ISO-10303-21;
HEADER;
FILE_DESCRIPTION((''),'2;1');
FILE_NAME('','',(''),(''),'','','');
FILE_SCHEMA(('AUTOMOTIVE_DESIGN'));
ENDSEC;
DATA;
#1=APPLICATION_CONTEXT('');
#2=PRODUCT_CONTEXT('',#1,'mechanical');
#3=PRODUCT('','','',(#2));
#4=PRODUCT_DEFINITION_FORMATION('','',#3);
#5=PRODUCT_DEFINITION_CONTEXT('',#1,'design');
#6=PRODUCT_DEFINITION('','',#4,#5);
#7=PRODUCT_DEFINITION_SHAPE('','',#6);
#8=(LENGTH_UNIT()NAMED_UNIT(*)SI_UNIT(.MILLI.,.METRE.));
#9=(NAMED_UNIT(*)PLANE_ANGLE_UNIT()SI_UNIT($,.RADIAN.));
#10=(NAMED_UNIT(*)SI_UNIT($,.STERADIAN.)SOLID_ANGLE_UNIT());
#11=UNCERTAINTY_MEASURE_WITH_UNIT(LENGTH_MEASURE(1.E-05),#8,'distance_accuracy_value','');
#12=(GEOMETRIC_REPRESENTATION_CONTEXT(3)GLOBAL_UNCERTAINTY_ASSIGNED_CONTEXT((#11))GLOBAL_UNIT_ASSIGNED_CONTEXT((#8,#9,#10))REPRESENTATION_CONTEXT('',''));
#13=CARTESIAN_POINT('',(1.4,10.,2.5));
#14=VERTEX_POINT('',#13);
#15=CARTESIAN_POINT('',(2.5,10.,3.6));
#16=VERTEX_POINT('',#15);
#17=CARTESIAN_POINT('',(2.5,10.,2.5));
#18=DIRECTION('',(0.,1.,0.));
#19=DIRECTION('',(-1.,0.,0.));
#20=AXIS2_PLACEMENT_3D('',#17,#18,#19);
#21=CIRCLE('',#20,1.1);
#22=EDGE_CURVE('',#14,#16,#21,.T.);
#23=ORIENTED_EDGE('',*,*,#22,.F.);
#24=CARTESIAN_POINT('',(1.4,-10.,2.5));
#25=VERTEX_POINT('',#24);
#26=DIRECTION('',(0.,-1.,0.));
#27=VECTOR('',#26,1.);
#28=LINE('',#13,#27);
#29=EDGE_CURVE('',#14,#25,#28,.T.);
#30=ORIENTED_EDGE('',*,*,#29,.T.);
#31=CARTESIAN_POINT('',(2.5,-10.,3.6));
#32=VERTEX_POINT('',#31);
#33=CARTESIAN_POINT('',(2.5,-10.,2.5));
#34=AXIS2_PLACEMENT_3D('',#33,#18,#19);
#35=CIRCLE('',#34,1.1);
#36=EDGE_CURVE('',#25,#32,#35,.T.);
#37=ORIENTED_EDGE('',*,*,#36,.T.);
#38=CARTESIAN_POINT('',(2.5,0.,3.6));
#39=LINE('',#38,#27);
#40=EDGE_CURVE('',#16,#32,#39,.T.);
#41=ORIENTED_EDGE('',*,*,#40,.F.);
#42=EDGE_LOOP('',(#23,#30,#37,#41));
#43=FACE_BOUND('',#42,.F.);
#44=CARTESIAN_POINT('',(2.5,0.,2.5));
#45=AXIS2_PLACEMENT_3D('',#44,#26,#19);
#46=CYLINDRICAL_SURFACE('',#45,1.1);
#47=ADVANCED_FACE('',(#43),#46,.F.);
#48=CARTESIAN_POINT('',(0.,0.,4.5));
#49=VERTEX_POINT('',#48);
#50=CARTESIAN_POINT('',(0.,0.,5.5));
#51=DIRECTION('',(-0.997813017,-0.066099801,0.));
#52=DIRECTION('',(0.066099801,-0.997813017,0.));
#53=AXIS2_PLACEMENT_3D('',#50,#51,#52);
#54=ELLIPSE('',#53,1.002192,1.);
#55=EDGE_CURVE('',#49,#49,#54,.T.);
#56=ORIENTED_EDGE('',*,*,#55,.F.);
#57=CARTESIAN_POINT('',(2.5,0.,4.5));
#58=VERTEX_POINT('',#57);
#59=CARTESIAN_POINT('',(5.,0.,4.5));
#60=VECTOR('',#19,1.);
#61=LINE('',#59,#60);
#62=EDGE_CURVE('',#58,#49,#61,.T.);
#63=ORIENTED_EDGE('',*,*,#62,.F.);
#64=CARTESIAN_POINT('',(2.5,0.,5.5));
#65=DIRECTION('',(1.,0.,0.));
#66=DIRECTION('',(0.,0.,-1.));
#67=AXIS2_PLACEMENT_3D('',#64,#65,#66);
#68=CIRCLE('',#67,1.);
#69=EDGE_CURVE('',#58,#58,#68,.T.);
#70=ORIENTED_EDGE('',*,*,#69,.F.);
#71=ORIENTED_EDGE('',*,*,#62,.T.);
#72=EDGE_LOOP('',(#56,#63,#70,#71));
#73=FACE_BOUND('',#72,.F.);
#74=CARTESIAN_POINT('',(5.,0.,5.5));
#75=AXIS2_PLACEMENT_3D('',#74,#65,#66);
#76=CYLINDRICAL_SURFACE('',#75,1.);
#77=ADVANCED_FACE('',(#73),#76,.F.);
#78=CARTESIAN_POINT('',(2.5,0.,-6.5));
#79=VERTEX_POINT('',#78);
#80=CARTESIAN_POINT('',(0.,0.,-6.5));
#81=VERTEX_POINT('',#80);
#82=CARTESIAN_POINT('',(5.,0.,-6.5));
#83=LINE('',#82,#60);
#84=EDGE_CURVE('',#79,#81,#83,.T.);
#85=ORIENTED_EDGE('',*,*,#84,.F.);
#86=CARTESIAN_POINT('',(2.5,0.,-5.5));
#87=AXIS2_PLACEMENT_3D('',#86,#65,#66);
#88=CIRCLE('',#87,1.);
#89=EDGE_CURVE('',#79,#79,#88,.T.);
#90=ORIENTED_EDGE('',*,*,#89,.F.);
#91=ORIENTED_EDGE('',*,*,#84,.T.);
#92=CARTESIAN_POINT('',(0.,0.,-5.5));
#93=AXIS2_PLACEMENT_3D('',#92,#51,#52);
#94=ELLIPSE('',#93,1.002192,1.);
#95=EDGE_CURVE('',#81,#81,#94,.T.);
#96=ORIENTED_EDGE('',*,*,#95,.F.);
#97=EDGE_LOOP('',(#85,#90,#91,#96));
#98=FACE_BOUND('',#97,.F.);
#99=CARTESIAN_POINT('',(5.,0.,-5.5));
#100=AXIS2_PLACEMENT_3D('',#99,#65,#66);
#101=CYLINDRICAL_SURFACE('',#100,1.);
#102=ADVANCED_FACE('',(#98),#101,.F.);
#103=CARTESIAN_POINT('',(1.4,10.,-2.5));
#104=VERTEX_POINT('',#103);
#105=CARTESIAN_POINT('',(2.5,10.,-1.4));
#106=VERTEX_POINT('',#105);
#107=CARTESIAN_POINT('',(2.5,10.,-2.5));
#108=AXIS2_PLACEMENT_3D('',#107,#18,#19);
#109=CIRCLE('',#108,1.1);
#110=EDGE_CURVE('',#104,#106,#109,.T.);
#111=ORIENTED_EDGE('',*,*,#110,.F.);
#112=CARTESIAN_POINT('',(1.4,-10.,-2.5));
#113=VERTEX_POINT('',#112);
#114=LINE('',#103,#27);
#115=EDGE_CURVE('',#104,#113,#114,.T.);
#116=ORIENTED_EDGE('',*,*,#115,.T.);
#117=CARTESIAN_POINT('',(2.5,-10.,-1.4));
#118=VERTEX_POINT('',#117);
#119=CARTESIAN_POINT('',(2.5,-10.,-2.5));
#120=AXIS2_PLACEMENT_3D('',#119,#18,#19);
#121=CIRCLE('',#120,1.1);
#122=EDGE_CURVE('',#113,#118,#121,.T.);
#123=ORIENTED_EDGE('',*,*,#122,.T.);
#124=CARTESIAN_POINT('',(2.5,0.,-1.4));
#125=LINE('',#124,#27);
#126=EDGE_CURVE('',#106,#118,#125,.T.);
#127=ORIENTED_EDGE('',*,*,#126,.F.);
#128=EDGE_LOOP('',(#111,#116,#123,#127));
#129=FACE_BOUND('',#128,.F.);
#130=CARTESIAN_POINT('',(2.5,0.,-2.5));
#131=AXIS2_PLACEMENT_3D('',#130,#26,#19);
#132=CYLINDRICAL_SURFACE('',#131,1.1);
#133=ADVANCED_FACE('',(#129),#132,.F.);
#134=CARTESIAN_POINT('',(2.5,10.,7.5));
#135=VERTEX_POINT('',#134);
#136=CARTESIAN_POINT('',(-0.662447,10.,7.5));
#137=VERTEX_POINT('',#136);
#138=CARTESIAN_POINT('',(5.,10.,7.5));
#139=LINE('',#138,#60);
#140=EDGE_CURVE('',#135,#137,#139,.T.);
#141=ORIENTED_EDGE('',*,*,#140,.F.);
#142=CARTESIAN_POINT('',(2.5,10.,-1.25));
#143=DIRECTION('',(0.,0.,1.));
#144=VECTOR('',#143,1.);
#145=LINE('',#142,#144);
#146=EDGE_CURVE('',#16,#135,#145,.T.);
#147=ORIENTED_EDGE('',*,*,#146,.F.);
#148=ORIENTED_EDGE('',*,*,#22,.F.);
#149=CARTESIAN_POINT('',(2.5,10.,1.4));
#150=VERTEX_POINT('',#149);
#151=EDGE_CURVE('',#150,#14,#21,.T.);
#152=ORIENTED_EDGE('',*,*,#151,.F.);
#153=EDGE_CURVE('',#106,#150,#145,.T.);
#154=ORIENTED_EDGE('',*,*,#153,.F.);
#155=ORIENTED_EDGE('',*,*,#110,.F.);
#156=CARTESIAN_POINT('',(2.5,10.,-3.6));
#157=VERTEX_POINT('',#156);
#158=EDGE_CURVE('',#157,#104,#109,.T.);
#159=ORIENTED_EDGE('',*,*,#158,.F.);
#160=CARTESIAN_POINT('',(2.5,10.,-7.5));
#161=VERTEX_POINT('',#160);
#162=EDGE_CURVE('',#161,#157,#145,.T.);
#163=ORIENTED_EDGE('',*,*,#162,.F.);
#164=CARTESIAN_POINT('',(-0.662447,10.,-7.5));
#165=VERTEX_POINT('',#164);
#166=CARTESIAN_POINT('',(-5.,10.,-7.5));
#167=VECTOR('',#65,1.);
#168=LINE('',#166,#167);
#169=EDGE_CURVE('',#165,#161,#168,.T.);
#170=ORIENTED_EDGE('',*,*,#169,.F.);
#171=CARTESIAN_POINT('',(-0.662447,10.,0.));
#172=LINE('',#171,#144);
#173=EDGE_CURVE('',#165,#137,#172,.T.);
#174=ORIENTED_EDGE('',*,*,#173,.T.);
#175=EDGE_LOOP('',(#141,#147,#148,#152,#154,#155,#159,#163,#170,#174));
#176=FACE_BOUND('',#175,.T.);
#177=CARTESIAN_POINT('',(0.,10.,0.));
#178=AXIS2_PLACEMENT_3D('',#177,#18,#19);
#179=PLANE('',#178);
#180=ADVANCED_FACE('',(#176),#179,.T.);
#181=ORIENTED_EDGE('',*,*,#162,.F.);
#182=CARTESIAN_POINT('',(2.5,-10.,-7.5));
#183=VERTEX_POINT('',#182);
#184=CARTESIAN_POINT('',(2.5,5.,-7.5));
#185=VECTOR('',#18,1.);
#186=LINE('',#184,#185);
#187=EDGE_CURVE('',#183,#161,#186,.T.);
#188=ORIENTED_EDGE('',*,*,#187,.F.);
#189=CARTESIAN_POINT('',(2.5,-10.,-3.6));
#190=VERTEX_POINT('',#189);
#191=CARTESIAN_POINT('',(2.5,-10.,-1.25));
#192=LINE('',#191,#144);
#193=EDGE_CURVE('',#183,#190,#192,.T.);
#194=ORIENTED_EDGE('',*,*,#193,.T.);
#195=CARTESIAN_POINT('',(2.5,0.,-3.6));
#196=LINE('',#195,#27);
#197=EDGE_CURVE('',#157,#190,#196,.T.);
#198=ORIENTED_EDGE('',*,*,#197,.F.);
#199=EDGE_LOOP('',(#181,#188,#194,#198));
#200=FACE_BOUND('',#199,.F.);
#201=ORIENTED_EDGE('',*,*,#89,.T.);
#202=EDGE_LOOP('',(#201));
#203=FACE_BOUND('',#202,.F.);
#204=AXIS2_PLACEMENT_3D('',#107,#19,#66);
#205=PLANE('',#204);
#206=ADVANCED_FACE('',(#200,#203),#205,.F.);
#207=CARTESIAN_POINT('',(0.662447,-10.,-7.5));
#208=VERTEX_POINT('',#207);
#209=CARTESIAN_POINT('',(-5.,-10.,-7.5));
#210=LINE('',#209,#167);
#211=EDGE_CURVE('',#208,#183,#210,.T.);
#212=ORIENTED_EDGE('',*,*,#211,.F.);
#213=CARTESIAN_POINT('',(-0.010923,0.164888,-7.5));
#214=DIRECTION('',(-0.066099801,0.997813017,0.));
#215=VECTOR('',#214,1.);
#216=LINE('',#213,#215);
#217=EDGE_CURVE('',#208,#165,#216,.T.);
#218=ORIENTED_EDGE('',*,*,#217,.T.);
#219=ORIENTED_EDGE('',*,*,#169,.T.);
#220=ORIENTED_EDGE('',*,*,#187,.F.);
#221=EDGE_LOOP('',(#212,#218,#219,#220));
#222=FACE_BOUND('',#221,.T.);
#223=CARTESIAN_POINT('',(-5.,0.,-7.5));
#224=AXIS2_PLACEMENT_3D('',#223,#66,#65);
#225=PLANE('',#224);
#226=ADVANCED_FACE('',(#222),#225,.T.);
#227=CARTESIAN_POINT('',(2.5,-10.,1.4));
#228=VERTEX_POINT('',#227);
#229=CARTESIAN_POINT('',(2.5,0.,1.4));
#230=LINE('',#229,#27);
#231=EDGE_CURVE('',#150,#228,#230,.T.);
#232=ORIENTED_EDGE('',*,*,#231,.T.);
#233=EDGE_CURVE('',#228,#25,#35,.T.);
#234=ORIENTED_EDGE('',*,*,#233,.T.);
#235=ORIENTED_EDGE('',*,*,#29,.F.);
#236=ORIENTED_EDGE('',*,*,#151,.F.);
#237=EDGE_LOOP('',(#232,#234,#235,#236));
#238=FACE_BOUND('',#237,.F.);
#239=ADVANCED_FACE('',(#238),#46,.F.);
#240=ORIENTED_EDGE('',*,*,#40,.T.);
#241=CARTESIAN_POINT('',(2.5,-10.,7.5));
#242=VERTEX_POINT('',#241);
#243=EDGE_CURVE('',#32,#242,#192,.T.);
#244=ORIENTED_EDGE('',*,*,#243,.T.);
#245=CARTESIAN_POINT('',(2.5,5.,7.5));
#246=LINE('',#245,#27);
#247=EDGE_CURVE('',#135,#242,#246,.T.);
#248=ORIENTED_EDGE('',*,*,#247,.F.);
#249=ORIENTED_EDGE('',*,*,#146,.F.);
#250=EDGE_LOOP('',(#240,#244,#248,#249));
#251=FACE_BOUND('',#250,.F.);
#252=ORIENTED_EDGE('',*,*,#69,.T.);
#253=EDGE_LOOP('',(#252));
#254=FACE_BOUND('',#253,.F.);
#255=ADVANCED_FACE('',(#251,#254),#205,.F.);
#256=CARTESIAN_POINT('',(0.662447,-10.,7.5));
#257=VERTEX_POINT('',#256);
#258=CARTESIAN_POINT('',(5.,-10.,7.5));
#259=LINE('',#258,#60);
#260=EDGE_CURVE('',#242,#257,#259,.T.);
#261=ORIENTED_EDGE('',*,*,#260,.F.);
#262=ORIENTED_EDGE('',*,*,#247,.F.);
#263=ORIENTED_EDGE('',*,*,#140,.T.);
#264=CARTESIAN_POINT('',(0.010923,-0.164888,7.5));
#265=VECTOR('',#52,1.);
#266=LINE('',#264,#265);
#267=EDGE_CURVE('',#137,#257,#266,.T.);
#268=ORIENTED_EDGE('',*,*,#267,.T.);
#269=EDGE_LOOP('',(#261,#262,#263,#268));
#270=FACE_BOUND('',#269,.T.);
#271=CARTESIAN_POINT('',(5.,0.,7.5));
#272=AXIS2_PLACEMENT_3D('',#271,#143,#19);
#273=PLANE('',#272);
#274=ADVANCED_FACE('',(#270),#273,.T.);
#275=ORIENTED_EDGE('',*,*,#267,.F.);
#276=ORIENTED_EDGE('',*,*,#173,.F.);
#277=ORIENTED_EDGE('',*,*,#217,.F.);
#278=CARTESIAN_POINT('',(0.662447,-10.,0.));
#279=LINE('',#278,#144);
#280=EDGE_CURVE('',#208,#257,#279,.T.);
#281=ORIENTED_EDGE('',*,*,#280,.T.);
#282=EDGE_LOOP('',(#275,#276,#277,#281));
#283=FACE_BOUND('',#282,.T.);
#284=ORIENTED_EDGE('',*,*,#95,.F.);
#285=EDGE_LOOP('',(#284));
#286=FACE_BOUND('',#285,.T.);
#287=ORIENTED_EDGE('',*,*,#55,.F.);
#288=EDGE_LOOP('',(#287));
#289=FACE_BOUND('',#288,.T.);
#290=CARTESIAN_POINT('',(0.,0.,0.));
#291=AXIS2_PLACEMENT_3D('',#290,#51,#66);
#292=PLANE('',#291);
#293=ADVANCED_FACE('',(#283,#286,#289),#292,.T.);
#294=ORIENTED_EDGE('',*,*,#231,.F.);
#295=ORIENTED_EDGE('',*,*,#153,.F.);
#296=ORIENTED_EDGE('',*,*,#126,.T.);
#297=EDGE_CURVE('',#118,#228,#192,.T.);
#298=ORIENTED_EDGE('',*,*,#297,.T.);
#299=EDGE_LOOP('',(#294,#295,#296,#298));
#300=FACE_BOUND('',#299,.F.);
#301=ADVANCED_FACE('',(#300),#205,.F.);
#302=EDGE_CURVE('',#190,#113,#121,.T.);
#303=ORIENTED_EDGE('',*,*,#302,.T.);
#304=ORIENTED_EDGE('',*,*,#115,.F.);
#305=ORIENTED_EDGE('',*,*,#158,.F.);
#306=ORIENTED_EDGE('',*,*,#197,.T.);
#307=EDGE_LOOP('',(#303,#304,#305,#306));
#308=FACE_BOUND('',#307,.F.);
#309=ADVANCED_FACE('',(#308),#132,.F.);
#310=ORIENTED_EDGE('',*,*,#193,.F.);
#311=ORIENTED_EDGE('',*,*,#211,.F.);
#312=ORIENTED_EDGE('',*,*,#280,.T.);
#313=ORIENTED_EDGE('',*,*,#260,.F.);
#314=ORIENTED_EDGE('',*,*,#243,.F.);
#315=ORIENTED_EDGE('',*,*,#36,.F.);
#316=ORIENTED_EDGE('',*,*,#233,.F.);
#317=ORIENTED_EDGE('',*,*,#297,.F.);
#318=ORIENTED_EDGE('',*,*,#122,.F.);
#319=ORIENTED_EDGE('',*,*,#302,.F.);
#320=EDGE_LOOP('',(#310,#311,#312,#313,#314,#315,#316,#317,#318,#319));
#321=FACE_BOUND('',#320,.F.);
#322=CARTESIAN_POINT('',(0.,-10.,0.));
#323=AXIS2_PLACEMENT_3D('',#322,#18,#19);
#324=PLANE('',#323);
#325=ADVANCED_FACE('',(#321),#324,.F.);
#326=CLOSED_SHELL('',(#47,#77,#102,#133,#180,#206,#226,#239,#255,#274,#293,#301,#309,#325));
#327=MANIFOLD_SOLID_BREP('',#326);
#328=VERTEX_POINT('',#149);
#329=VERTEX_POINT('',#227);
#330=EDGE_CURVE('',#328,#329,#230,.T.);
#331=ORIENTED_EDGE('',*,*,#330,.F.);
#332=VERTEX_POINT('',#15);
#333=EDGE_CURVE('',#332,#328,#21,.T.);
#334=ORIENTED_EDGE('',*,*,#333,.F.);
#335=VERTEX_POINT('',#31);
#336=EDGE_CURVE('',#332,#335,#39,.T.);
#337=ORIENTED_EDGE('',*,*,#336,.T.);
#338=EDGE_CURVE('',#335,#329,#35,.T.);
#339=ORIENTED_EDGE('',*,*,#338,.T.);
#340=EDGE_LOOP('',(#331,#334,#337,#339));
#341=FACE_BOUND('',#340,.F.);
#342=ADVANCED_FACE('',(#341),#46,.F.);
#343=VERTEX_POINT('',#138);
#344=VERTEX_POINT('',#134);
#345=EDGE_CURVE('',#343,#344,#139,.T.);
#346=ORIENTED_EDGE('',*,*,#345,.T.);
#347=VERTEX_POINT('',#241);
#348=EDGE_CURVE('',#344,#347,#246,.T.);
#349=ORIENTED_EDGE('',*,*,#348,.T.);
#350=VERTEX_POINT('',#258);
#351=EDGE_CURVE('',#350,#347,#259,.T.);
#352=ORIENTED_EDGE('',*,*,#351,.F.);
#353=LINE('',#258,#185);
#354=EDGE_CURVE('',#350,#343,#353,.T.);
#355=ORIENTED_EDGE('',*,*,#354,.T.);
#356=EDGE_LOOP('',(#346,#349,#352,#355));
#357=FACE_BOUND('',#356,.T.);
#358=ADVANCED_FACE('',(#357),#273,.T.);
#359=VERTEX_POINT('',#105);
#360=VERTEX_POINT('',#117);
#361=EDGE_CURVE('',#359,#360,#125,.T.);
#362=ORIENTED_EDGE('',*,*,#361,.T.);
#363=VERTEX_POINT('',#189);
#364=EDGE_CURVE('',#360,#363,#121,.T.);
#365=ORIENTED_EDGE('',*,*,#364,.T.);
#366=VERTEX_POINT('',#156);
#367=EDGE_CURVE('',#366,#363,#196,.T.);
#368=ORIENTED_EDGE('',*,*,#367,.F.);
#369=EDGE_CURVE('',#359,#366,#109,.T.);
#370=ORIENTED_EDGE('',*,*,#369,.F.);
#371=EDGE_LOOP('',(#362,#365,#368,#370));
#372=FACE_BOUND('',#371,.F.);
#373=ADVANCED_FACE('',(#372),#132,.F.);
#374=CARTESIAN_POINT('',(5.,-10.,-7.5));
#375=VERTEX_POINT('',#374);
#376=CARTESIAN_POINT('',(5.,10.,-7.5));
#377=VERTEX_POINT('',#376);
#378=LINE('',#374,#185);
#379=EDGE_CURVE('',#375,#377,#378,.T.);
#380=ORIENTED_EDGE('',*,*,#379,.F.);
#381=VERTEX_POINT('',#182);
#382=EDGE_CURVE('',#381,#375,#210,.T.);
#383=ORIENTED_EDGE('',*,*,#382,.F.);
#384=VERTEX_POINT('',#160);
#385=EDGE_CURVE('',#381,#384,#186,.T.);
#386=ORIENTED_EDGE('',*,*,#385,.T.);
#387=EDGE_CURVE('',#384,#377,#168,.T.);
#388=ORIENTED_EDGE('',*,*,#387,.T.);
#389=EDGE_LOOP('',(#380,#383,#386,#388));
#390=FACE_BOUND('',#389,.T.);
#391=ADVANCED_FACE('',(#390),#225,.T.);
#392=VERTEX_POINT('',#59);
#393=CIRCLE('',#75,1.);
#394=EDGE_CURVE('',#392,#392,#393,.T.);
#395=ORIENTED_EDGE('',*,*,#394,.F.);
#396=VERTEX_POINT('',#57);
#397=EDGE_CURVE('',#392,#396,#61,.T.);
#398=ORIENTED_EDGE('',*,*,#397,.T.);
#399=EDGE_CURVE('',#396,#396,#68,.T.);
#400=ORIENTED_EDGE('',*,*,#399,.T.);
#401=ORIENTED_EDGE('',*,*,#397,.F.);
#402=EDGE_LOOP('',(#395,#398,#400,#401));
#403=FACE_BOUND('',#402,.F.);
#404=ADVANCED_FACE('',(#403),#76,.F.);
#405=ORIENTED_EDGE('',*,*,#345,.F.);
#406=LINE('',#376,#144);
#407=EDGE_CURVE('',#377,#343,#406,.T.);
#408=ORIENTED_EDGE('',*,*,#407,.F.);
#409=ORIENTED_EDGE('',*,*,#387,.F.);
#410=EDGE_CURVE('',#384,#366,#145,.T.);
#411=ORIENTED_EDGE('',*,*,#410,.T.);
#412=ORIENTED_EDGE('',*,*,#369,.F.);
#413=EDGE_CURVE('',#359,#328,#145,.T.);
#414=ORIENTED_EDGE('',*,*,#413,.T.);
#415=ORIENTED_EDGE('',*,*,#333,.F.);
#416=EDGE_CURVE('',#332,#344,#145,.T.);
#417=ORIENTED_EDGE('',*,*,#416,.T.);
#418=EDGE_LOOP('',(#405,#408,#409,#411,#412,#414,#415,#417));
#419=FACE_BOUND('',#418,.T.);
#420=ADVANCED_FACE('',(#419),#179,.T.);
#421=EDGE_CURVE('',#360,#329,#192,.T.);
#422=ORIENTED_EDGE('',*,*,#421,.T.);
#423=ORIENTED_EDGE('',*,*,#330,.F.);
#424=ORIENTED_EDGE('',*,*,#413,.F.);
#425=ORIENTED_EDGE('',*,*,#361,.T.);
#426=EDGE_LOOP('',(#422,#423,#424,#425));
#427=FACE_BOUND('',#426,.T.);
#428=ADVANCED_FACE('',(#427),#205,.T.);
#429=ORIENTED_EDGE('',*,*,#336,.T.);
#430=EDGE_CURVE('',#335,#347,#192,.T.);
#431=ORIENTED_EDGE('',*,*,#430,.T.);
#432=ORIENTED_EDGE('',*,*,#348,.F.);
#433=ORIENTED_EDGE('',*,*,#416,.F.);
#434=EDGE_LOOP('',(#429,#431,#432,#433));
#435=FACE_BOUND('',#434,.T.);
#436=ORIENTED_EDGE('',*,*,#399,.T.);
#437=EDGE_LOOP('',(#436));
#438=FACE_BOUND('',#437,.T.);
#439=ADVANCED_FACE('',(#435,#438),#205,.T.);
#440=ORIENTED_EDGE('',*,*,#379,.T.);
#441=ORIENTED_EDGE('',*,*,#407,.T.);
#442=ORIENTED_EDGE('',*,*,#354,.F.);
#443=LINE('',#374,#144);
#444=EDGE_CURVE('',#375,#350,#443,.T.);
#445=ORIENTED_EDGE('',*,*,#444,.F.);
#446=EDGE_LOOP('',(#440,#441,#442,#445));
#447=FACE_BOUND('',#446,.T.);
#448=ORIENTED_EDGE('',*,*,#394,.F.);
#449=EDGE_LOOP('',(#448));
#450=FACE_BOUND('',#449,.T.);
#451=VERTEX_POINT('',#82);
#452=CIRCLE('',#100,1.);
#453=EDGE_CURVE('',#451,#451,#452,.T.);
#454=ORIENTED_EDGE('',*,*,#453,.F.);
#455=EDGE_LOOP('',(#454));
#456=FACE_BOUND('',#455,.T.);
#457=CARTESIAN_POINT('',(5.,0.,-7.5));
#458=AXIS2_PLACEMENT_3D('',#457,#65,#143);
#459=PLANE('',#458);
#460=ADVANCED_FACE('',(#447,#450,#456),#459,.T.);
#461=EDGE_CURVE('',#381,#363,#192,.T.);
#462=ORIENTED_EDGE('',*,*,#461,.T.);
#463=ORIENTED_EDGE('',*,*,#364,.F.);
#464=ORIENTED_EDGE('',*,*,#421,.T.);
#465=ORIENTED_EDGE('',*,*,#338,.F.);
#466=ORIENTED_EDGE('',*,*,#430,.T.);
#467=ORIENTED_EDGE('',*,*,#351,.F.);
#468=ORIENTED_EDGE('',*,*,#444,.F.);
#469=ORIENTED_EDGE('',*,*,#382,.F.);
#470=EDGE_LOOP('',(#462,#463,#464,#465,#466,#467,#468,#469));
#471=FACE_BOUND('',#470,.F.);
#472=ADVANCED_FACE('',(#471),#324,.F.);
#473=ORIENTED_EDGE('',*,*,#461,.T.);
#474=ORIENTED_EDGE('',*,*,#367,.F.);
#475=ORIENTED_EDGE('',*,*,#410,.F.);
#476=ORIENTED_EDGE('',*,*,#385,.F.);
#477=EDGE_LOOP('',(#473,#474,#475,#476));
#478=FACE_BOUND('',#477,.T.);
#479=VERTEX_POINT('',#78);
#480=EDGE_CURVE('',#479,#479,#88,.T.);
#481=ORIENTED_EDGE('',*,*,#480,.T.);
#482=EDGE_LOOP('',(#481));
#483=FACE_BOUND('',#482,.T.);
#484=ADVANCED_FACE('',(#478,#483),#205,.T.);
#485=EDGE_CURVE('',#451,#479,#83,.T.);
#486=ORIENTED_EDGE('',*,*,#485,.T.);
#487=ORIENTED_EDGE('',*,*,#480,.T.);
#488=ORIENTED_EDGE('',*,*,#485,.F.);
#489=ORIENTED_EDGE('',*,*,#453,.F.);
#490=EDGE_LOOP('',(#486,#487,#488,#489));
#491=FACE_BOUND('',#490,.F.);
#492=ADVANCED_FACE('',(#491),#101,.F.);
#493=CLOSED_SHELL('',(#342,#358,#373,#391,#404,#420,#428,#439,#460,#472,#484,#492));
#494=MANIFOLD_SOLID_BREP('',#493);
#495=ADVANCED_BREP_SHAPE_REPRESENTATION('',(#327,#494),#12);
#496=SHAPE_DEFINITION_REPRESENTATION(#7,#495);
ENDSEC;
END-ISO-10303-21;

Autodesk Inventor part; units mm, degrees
ref_plane "XZ Plane" through (0, 0, 0) normal (0, 1, 0) x (-1, 0, 0)
ref_plane "XY Plane" through (0, 0, 0) normal (0, 0, 1) x (1, 0, 0)
sketch "Sketch1" plane through (0, 0, 0) normal (0, 1, 0) x (-1, 0, 0)
  line L0 (-5, 7.5) -> (5, 7.5)
  line L1 (5, 7.5) -> (5, -7.5)
  line L2 (5, -7.5) -> (-5, -7.5)
  line L3 (-5, -7.5) -> (-5, 7.5)
  line L4 (-5, 7.5) -> (5, -7.5) construction
  line L5 (5, 7.5) -> (-5, -7.5) construction
  line L6 (-2.5, 2.5) -> (2.5, 2.5) construction
  line L7 (2.5, 2.5) -> (2.5, -2.5) construction
  line L8 (2.5, -2.5) -> (-2.5, -2.5) construction
  line L9 (-2.5, -2.5) -> (-2.5, 2.5) construction
  line L10 (-2.5, 2.5) -> (2.5, -2.5) construction
  line L11 (2.5, 2.5) -> (-2.5, -2.5) construction
  circle A0 centre (2.5, -2.5) radius 1.1
  circle A1 centre (2.5, 2.5) radius 1.1
  circle A2 centre (-2.5, -2.5) radius 1.1
  circle A3 centre (-2.5, 2.5) radius 1.1
  point P0 (0, 0)
  dimension "d6" = 2.2
  dimension "d7" = 2.2
  dimension "d8" = 2.2
  dimension "d9" = 2.2
  dimension "d10" = 10
  dimension "d11" = 15
  dimension "d12" = 5
  dimension "d13" = 5
extrude "Extrusion3" add sketch "Sketch1" along normal mid plane 20
ref_plane "Work Plane2" through (2.5, 10, -2.5) normal (-1, 0, 0) x (0, -1, 0)
ref_plane "Work Plane4" through (0, 0, 0) normal (0.997813, 0.0660998, 0) x (0, 0, 1)
split "Split2" plane through (0, 0, 0) removes the side toward (-0.997813, -0.0660998, 0)
ref_plane "Work Plane5" through (5, -10, -7.5) normal (1, 0, 0) x (0, 0, -1)
sketch "Sketch3" plane through (5, -10, -7.5) normal (1, 0, 0) x (0, 0, -1)
  line L0 (-2, 10) -> (-13, 10) construction
  circle A0 centre (-13, 10) radius 1
  circle A1 centre (-2, 10) radius 1
  point P0 (-7.5, 10)
  dimension "d21" = 5.5
  dimension "d22" = 5.5
  dimension "d23" = 2
  dimension "d24" = 2
extrude "Extrusion4" cut sketch "Sketch3" against normal through all
split body "Split5" result two bodies by plane through (2.5, 10, -2.5) normal (-1, 0, 0) first body at (0.9582, -6.9004, 1.6335)
thread "Thread1" size "M2x0.4" class "6H" standard "ANSI Metric M Profile" full length
thread "Thread2" size "M2x0.4" class "6H" standard "ANSI Metric M Profile" full length
equation "\"d7\" = d6"
equation "\"d8\" = d7"
equation "\"d9\" = d6"
equation "\"d22\" = d21"
equation "\"d24\" = d23"
properties part number "loop holder"
